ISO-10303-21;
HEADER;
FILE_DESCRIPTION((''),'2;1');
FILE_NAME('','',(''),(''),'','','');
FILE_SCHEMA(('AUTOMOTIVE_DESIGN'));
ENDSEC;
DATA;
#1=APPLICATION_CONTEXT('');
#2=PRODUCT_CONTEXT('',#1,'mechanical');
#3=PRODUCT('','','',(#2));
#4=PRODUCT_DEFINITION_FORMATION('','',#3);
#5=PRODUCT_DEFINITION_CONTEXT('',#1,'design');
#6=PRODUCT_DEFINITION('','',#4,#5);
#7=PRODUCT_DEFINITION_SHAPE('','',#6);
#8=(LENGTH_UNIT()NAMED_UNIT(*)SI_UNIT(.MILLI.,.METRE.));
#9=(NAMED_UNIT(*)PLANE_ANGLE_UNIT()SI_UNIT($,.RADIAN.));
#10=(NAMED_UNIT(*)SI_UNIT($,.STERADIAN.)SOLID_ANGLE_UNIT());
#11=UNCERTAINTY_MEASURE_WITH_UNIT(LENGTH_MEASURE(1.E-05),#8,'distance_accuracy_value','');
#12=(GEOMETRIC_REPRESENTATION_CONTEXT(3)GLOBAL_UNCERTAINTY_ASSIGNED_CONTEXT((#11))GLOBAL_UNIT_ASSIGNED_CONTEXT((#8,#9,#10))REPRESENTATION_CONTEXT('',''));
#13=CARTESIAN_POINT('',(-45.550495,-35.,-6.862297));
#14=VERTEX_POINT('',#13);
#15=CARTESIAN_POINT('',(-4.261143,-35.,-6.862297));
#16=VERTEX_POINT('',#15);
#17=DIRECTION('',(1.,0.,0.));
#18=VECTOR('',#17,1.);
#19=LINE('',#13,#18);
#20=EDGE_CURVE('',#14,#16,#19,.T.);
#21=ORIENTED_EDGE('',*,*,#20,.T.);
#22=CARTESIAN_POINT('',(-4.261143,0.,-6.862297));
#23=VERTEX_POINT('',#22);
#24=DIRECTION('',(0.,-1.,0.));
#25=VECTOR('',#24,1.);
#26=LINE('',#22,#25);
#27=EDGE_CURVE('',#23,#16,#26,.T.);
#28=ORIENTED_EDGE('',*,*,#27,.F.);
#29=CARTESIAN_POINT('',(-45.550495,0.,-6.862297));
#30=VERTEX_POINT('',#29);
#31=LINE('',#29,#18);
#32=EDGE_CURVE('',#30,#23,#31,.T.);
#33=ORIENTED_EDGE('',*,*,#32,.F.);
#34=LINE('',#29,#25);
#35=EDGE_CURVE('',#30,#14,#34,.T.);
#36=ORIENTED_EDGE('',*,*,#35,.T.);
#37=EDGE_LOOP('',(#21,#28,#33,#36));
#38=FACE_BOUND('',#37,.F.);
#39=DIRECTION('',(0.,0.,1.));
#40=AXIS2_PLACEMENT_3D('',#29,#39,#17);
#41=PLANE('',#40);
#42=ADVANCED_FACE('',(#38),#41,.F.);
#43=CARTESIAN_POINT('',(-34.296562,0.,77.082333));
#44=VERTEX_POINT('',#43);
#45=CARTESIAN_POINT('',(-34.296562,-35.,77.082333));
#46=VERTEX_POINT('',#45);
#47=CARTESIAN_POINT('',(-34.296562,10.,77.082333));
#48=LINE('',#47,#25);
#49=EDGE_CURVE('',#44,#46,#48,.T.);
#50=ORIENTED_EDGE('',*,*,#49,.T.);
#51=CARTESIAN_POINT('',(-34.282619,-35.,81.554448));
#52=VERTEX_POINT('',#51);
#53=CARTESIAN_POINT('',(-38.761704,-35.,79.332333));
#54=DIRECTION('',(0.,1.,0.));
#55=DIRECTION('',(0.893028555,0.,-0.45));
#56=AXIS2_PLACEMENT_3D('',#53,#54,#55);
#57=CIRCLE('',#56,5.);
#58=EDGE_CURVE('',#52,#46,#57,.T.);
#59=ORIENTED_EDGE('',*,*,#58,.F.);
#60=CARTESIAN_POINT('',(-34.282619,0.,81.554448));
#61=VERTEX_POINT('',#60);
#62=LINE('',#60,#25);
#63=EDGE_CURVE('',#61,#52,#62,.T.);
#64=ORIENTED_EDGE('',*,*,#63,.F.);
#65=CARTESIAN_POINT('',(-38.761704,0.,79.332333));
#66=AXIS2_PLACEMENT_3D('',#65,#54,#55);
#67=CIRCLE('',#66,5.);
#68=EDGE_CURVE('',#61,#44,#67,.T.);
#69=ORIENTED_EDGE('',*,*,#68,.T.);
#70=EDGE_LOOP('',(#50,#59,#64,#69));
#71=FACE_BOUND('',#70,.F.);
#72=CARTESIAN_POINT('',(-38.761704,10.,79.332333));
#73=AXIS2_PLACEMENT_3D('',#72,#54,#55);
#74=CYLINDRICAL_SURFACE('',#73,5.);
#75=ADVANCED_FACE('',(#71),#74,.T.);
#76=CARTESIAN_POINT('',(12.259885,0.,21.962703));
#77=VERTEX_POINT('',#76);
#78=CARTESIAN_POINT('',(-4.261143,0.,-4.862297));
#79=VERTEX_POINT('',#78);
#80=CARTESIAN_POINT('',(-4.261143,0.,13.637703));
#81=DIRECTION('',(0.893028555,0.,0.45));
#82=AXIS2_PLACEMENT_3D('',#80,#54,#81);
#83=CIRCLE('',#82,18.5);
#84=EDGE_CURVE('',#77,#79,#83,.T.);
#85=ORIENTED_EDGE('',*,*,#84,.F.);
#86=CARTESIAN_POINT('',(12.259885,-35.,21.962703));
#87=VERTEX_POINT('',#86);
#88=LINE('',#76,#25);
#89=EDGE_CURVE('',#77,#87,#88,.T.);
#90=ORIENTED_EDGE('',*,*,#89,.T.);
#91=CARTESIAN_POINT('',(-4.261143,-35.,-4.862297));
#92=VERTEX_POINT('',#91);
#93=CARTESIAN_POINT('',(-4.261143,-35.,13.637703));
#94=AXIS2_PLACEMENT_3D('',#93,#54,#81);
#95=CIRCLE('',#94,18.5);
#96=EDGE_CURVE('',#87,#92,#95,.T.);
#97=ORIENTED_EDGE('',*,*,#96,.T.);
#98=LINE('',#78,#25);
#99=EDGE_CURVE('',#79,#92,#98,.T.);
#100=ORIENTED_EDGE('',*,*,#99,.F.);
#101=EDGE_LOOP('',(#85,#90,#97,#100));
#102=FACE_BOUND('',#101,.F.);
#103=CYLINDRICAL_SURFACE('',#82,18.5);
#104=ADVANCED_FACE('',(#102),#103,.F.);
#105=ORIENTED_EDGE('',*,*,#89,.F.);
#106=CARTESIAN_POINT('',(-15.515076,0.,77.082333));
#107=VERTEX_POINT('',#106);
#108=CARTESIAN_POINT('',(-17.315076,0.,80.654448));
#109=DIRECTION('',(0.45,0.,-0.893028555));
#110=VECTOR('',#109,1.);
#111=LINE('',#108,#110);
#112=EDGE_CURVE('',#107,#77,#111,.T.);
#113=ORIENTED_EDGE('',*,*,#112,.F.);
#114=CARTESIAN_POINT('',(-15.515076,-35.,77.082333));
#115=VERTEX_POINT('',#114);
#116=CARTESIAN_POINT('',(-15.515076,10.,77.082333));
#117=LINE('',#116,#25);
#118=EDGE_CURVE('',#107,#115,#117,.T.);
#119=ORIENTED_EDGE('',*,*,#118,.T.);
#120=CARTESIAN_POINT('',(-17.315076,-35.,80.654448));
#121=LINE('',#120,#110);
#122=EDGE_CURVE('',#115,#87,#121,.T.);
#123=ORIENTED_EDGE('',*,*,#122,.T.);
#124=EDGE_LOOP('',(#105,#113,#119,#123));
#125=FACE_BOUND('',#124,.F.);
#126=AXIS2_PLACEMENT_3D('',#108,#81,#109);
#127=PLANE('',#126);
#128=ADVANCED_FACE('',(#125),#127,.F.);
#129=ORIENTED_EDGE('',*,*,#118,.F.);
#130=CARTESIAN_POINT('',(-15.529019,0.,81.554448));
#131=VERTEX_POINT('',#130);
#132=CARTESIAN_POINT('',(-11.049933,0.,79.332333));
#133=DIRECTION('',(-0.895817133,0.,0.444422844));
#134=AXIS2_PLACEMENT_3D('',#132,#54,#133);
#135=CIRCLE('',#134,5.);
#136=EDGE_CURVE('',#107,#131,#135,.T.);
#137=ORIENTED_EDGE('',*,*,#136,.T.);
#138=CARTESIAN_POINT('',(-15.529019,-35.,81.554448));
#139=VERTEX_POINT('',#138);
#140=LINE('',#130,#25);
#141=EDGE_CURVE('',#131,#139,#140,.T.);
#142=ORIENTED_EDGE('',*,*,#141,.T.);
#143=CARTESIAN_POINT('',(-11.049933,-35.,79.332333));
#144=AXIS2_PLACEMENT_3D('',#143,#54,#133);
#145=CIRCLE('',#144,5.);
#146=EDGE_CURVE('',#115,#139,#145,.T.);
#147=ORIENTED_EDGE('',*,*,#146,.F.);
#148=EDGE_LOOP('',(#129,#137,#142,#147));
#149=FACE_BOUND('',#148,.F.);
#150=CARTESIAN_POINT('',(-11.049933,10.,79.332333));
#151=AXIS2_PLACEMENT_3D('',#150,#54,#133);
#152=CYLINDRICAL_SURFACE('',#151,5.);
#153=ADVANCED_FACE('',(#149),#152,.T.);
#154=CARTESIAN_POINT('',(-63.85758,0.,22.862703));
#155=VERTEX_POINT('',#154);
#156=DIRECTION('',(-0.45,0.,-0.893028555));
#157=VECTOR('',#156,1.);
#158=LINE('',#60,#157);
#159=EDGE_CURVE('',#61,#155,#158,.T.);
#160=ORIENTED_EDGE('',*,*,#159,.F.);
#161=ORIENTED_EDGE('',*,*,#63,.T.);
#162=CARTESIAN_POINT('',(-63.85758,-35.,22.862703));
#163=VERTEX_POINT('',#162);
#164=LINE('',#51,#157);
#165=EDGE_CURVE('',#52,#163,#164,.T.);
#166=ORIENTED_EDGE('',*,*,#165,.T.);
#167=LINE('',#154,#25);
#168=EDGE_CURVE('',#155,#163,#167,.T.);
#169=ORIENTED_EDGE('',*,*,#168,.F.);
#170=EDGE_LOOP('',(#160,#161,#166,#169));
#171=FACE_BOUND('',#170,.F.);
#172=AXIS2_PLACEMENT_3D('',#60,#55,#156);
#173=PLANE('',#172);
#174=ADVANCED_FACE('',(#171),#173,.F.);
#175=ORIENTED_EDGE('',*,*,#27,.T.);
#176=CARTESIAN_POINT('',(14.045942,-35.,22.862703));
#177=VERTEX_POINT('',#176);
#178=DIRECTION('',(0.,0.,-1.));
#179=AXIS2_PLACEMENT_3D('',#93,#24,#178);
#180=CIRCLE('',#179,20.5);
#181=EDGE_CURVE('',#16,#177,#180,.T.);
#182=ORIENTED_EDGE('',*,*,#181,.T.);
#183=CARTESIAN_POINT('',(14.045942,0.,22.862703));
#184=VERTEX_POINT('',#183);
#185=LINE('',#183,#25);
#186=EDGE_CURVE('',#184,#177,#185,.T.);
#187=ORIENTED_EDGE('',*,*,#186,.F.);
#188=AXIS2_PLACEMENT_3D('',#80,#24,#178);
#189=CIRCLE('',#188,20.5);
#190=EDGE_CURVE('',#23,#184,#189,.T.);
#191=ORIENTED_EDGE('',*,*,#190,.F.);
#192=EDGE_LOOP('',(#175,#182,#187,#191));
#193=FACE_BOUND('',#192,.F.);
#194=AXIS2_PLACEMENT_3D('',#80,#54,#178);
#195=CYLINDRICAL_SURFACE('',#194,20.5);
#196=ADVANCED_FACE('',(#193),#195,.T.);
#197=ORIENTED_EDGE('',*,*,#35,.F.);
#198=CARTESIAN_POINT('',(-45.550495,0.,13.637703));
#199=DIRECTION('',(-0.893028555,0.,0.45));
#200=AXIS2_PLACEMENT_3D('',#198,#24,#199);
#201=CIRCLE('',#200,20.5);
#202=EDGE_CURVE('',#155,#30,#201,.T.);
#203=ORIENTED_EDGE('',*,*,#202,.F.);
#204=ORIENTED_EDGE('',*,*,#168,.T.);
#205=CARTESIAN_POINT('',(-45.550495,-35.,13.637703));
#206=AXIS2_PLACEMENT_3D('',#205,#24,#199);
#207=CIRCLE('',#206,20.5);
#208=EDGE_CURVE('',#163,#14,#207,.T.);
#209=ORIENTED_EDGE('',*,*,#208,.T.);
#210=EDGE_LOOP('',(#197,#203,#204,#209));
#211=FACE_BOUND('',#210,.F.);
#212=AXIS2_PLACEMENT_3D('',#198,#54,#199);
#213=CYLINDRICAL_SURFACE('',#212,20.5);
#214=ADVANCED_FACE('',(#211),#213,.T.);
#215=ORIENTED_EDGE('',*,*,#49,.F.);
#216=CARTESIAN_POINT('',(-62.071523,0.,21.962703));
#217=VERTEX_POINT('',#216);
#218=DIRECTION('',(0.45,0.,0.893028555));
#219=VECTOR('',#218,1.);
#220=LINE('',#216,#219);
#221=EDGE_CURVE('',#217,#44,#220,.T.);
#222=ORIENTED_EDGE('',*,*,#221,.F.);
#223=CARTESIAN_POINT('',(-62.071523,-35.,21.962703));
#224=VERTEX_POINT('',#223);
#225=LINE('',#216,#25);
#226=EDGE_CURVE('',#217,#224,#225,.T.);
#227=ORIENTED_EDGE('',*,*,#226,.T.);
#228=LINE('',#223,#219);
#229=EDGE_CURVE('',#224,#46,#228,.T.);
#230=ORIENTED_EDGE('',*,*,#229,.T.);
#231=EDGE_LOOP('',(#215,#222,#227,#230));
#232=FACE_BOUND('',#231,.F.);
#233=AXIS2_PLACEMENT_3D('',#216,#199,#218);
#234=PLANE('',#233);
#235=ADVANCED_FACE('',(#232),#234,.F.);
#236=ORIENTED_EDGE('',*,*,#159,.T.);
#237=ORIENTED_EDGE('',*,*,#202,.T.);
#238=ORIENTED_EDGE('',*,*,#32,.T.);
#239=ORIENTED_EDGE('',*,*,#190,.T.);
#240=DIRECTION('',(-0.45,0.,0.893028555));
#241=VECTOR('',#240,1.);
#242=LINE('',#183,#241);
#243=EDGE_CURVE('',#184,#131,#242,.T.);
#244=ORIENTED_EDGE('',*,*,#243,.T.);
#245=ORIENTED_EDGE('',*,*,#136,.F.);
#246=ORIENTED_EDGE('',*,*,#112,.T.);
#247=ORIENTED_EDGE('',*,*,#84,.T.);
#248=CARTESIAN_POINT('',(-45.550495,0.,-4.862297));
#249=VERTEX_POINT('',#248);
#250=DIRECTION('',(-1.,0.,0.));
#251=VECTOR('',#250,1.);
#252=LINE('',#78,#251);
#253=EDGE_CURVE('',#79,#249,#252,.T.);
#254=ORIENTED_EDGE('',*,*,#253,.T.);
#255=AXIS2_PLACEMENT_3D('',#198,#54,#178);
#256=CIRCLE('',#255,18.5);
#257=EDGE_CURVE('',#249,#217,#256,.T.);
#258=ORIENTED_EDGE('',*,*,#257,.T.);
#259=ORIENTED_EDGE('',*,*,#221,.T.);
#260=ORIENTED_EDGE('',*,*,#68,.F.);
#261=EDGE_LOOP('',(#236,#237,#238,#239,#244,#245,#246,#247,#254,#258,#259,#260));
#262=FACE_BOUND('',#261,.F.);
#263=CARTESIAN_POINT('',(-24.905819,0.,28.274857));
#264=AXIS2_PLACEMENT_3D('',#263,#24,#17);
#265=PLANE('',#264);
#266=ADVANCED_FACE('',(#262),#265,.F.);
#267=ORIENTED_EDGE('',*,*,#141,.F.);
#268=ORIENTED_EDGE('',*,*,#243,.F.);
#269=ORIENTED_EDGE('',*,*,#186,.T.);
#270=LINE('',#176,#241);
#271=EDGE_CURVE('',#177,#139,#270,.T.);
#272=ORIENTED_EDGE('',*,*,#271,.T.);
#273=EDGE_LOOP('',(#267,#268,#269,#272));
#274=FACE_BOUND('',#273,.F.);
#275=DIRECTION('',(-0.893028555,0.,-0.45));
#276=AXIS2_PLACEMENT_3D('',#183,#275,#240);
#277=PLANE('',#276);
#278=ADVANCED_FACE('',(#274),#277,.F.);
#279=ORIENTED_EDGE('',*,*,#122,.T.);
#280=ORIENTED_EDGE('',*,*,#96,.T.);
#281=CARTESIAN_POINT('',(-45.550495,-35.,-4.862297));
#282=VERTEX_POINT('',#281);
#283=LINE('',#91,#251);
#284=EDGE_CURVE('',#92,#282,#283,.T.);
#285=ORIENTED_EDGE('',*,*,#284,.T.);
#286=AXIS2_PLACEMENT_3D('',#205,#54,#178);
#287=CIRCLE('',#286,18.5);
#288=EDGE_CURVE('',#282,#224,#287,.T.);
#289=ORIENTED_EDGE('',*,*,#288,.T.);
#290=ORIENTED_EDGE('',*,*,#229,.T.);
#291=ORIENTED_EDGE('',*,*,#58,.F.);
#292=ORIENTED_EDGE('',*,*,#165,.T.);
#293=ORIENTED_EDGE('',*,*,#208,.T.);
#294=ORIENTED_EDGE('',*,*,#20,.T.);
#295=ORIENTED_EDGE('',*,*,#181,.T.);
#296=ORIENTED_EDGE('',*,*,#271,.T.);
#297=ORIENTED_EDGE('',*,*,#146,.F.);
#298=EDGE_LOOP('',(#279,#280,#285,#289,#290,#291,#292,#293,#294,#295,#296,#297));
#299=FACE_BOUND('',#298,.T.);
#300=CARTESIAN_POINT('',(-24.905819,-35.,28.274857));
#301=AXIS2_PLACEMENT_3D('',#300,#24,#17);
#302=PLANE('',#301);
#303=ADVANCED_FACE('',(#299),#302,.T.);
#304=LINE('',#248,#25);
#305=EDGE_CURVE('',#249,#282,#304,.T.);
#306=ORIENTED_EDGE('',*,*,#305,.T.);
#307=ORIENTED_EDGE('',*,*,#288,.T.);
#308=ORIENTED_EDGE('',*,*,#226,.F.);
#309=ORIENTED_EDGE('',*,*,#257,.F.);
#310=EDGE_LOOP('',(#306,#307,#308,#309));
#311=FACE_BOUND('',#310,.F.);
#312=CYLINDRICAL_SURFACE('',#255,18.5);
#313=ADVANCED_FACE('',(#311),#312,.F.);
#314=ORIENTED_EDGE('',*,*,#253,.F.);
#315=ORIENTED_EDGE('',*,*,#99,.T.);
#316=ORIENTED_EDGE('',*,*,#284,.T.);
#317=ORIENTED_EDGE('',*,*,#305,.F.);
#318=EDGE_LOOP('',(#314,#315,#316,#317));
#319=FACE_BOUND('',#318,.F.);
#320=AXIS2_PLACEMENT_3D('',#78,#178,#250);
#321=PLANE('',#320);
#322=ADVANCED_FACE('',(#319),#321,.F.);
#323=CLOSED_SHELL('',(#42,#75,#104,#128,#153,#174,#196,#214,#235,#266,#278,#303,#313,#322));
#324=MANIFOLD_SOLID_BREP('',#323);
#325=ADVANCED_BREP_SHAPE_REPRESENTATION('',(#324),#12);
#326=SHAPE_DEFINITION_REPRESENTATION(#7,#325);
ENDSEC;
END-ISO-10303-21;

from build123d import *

# Parameters (mm, degrees)
F1_DEPTH    = 35
F2_T1_DEPTH = 55


# Not quite as in the source:
# - a fillet or chamfer that OpenCascade refuses, or shapes differently, is made with other operations: its cross-section is extruded or revolved along the edge and cut away or added


with BuildPart() as f1:
    # F0 (on Front) → F1 (new body)
    with BuildSketch(Plane.XZ):
        with BuildLine():
            Line((-15.5290191181, 81.5544475097), (-17.315076228, 80.6544475097))
            Line((-17.315076228, 80.6544475097), (12.2598850951, 21.9627031234))
            ThreePointArc((12.2598850951, 21.9627031234), (11.4910392166, 3.9362212778), (-4.2611431719, -4.8622968766))
            Line((-4.2611431719, -4.8622968766), (-45.5504947187, -4.8622968766))
            ThreePointArc((-45.5504947187, -4.8622968766), (-61.3026771072, 3.9362212778), (-62.0715229858, 21.9627031234))
            Line((-62.0715229858, 21.9627031234), (-32.4965616626, 80.6544475097))
            Line((-32.4965616626, 80.6544475097), (-34.2826187726, 81.5544475097))
            Line((-34.2826187726, 81.5544475097), (-63.8575800957, 22.8627031234))
            ThreePointArc((-63.8575800957, 22.8627031234), (-63.0056157438, 2.8874124296), (-45.5504947187, -6.8622968766))
            Line((-45.5504947187, -6.8622968766), (-4.2611431719, -6.8622968766))
            ThreePointArc((-4.2611431719, -6.8622968766), (13.1939778532, 2.8874124296), (14.0459422051, 22.8627031234))
            Line((14.0459422051, 22.8627031234), (-15.5290191181, 81.5544475097))
        make_face()
    extrude(amount=F1_DEPTH)

    # F2: fillet of radius 5 on 2 edges, made by hand

    # F2_s2 → F2_t1 (cut)
    with BuildSketch(Plane.XZ.offset(-10)):
        with BuildLine():
            ThreePointArc((-34.2965616626, 77.0823332898), (-33.7617287381, 79.3167446648), (-34.2826187726, 81.5544475097))
            Line((-34.2826187726, 81.5544475097), (-32.4965616626, 80.6544475097))
            Line((-32.4965616626, 80.6544475097), (-34.2965616626, 77.0823332898))
        make_face()
        with BuildLine():
            ThreePointArc((-15.5290191181, 81.5544475097), (-16.0499091526, 79.3167446648), (-15.515076228, 77.0823332898))
            Line((-15.515076228, 77.0823332898), (-17.315076228, 80.6544475097))
            Line((-17.315076228, 80.6544475097), (-15.5290191181, 81.5544475097))
        make_face()
    extrude(amount=F2_T1_DEPTH, mode=Mode.SUBTRACT)


solid = f1.part
